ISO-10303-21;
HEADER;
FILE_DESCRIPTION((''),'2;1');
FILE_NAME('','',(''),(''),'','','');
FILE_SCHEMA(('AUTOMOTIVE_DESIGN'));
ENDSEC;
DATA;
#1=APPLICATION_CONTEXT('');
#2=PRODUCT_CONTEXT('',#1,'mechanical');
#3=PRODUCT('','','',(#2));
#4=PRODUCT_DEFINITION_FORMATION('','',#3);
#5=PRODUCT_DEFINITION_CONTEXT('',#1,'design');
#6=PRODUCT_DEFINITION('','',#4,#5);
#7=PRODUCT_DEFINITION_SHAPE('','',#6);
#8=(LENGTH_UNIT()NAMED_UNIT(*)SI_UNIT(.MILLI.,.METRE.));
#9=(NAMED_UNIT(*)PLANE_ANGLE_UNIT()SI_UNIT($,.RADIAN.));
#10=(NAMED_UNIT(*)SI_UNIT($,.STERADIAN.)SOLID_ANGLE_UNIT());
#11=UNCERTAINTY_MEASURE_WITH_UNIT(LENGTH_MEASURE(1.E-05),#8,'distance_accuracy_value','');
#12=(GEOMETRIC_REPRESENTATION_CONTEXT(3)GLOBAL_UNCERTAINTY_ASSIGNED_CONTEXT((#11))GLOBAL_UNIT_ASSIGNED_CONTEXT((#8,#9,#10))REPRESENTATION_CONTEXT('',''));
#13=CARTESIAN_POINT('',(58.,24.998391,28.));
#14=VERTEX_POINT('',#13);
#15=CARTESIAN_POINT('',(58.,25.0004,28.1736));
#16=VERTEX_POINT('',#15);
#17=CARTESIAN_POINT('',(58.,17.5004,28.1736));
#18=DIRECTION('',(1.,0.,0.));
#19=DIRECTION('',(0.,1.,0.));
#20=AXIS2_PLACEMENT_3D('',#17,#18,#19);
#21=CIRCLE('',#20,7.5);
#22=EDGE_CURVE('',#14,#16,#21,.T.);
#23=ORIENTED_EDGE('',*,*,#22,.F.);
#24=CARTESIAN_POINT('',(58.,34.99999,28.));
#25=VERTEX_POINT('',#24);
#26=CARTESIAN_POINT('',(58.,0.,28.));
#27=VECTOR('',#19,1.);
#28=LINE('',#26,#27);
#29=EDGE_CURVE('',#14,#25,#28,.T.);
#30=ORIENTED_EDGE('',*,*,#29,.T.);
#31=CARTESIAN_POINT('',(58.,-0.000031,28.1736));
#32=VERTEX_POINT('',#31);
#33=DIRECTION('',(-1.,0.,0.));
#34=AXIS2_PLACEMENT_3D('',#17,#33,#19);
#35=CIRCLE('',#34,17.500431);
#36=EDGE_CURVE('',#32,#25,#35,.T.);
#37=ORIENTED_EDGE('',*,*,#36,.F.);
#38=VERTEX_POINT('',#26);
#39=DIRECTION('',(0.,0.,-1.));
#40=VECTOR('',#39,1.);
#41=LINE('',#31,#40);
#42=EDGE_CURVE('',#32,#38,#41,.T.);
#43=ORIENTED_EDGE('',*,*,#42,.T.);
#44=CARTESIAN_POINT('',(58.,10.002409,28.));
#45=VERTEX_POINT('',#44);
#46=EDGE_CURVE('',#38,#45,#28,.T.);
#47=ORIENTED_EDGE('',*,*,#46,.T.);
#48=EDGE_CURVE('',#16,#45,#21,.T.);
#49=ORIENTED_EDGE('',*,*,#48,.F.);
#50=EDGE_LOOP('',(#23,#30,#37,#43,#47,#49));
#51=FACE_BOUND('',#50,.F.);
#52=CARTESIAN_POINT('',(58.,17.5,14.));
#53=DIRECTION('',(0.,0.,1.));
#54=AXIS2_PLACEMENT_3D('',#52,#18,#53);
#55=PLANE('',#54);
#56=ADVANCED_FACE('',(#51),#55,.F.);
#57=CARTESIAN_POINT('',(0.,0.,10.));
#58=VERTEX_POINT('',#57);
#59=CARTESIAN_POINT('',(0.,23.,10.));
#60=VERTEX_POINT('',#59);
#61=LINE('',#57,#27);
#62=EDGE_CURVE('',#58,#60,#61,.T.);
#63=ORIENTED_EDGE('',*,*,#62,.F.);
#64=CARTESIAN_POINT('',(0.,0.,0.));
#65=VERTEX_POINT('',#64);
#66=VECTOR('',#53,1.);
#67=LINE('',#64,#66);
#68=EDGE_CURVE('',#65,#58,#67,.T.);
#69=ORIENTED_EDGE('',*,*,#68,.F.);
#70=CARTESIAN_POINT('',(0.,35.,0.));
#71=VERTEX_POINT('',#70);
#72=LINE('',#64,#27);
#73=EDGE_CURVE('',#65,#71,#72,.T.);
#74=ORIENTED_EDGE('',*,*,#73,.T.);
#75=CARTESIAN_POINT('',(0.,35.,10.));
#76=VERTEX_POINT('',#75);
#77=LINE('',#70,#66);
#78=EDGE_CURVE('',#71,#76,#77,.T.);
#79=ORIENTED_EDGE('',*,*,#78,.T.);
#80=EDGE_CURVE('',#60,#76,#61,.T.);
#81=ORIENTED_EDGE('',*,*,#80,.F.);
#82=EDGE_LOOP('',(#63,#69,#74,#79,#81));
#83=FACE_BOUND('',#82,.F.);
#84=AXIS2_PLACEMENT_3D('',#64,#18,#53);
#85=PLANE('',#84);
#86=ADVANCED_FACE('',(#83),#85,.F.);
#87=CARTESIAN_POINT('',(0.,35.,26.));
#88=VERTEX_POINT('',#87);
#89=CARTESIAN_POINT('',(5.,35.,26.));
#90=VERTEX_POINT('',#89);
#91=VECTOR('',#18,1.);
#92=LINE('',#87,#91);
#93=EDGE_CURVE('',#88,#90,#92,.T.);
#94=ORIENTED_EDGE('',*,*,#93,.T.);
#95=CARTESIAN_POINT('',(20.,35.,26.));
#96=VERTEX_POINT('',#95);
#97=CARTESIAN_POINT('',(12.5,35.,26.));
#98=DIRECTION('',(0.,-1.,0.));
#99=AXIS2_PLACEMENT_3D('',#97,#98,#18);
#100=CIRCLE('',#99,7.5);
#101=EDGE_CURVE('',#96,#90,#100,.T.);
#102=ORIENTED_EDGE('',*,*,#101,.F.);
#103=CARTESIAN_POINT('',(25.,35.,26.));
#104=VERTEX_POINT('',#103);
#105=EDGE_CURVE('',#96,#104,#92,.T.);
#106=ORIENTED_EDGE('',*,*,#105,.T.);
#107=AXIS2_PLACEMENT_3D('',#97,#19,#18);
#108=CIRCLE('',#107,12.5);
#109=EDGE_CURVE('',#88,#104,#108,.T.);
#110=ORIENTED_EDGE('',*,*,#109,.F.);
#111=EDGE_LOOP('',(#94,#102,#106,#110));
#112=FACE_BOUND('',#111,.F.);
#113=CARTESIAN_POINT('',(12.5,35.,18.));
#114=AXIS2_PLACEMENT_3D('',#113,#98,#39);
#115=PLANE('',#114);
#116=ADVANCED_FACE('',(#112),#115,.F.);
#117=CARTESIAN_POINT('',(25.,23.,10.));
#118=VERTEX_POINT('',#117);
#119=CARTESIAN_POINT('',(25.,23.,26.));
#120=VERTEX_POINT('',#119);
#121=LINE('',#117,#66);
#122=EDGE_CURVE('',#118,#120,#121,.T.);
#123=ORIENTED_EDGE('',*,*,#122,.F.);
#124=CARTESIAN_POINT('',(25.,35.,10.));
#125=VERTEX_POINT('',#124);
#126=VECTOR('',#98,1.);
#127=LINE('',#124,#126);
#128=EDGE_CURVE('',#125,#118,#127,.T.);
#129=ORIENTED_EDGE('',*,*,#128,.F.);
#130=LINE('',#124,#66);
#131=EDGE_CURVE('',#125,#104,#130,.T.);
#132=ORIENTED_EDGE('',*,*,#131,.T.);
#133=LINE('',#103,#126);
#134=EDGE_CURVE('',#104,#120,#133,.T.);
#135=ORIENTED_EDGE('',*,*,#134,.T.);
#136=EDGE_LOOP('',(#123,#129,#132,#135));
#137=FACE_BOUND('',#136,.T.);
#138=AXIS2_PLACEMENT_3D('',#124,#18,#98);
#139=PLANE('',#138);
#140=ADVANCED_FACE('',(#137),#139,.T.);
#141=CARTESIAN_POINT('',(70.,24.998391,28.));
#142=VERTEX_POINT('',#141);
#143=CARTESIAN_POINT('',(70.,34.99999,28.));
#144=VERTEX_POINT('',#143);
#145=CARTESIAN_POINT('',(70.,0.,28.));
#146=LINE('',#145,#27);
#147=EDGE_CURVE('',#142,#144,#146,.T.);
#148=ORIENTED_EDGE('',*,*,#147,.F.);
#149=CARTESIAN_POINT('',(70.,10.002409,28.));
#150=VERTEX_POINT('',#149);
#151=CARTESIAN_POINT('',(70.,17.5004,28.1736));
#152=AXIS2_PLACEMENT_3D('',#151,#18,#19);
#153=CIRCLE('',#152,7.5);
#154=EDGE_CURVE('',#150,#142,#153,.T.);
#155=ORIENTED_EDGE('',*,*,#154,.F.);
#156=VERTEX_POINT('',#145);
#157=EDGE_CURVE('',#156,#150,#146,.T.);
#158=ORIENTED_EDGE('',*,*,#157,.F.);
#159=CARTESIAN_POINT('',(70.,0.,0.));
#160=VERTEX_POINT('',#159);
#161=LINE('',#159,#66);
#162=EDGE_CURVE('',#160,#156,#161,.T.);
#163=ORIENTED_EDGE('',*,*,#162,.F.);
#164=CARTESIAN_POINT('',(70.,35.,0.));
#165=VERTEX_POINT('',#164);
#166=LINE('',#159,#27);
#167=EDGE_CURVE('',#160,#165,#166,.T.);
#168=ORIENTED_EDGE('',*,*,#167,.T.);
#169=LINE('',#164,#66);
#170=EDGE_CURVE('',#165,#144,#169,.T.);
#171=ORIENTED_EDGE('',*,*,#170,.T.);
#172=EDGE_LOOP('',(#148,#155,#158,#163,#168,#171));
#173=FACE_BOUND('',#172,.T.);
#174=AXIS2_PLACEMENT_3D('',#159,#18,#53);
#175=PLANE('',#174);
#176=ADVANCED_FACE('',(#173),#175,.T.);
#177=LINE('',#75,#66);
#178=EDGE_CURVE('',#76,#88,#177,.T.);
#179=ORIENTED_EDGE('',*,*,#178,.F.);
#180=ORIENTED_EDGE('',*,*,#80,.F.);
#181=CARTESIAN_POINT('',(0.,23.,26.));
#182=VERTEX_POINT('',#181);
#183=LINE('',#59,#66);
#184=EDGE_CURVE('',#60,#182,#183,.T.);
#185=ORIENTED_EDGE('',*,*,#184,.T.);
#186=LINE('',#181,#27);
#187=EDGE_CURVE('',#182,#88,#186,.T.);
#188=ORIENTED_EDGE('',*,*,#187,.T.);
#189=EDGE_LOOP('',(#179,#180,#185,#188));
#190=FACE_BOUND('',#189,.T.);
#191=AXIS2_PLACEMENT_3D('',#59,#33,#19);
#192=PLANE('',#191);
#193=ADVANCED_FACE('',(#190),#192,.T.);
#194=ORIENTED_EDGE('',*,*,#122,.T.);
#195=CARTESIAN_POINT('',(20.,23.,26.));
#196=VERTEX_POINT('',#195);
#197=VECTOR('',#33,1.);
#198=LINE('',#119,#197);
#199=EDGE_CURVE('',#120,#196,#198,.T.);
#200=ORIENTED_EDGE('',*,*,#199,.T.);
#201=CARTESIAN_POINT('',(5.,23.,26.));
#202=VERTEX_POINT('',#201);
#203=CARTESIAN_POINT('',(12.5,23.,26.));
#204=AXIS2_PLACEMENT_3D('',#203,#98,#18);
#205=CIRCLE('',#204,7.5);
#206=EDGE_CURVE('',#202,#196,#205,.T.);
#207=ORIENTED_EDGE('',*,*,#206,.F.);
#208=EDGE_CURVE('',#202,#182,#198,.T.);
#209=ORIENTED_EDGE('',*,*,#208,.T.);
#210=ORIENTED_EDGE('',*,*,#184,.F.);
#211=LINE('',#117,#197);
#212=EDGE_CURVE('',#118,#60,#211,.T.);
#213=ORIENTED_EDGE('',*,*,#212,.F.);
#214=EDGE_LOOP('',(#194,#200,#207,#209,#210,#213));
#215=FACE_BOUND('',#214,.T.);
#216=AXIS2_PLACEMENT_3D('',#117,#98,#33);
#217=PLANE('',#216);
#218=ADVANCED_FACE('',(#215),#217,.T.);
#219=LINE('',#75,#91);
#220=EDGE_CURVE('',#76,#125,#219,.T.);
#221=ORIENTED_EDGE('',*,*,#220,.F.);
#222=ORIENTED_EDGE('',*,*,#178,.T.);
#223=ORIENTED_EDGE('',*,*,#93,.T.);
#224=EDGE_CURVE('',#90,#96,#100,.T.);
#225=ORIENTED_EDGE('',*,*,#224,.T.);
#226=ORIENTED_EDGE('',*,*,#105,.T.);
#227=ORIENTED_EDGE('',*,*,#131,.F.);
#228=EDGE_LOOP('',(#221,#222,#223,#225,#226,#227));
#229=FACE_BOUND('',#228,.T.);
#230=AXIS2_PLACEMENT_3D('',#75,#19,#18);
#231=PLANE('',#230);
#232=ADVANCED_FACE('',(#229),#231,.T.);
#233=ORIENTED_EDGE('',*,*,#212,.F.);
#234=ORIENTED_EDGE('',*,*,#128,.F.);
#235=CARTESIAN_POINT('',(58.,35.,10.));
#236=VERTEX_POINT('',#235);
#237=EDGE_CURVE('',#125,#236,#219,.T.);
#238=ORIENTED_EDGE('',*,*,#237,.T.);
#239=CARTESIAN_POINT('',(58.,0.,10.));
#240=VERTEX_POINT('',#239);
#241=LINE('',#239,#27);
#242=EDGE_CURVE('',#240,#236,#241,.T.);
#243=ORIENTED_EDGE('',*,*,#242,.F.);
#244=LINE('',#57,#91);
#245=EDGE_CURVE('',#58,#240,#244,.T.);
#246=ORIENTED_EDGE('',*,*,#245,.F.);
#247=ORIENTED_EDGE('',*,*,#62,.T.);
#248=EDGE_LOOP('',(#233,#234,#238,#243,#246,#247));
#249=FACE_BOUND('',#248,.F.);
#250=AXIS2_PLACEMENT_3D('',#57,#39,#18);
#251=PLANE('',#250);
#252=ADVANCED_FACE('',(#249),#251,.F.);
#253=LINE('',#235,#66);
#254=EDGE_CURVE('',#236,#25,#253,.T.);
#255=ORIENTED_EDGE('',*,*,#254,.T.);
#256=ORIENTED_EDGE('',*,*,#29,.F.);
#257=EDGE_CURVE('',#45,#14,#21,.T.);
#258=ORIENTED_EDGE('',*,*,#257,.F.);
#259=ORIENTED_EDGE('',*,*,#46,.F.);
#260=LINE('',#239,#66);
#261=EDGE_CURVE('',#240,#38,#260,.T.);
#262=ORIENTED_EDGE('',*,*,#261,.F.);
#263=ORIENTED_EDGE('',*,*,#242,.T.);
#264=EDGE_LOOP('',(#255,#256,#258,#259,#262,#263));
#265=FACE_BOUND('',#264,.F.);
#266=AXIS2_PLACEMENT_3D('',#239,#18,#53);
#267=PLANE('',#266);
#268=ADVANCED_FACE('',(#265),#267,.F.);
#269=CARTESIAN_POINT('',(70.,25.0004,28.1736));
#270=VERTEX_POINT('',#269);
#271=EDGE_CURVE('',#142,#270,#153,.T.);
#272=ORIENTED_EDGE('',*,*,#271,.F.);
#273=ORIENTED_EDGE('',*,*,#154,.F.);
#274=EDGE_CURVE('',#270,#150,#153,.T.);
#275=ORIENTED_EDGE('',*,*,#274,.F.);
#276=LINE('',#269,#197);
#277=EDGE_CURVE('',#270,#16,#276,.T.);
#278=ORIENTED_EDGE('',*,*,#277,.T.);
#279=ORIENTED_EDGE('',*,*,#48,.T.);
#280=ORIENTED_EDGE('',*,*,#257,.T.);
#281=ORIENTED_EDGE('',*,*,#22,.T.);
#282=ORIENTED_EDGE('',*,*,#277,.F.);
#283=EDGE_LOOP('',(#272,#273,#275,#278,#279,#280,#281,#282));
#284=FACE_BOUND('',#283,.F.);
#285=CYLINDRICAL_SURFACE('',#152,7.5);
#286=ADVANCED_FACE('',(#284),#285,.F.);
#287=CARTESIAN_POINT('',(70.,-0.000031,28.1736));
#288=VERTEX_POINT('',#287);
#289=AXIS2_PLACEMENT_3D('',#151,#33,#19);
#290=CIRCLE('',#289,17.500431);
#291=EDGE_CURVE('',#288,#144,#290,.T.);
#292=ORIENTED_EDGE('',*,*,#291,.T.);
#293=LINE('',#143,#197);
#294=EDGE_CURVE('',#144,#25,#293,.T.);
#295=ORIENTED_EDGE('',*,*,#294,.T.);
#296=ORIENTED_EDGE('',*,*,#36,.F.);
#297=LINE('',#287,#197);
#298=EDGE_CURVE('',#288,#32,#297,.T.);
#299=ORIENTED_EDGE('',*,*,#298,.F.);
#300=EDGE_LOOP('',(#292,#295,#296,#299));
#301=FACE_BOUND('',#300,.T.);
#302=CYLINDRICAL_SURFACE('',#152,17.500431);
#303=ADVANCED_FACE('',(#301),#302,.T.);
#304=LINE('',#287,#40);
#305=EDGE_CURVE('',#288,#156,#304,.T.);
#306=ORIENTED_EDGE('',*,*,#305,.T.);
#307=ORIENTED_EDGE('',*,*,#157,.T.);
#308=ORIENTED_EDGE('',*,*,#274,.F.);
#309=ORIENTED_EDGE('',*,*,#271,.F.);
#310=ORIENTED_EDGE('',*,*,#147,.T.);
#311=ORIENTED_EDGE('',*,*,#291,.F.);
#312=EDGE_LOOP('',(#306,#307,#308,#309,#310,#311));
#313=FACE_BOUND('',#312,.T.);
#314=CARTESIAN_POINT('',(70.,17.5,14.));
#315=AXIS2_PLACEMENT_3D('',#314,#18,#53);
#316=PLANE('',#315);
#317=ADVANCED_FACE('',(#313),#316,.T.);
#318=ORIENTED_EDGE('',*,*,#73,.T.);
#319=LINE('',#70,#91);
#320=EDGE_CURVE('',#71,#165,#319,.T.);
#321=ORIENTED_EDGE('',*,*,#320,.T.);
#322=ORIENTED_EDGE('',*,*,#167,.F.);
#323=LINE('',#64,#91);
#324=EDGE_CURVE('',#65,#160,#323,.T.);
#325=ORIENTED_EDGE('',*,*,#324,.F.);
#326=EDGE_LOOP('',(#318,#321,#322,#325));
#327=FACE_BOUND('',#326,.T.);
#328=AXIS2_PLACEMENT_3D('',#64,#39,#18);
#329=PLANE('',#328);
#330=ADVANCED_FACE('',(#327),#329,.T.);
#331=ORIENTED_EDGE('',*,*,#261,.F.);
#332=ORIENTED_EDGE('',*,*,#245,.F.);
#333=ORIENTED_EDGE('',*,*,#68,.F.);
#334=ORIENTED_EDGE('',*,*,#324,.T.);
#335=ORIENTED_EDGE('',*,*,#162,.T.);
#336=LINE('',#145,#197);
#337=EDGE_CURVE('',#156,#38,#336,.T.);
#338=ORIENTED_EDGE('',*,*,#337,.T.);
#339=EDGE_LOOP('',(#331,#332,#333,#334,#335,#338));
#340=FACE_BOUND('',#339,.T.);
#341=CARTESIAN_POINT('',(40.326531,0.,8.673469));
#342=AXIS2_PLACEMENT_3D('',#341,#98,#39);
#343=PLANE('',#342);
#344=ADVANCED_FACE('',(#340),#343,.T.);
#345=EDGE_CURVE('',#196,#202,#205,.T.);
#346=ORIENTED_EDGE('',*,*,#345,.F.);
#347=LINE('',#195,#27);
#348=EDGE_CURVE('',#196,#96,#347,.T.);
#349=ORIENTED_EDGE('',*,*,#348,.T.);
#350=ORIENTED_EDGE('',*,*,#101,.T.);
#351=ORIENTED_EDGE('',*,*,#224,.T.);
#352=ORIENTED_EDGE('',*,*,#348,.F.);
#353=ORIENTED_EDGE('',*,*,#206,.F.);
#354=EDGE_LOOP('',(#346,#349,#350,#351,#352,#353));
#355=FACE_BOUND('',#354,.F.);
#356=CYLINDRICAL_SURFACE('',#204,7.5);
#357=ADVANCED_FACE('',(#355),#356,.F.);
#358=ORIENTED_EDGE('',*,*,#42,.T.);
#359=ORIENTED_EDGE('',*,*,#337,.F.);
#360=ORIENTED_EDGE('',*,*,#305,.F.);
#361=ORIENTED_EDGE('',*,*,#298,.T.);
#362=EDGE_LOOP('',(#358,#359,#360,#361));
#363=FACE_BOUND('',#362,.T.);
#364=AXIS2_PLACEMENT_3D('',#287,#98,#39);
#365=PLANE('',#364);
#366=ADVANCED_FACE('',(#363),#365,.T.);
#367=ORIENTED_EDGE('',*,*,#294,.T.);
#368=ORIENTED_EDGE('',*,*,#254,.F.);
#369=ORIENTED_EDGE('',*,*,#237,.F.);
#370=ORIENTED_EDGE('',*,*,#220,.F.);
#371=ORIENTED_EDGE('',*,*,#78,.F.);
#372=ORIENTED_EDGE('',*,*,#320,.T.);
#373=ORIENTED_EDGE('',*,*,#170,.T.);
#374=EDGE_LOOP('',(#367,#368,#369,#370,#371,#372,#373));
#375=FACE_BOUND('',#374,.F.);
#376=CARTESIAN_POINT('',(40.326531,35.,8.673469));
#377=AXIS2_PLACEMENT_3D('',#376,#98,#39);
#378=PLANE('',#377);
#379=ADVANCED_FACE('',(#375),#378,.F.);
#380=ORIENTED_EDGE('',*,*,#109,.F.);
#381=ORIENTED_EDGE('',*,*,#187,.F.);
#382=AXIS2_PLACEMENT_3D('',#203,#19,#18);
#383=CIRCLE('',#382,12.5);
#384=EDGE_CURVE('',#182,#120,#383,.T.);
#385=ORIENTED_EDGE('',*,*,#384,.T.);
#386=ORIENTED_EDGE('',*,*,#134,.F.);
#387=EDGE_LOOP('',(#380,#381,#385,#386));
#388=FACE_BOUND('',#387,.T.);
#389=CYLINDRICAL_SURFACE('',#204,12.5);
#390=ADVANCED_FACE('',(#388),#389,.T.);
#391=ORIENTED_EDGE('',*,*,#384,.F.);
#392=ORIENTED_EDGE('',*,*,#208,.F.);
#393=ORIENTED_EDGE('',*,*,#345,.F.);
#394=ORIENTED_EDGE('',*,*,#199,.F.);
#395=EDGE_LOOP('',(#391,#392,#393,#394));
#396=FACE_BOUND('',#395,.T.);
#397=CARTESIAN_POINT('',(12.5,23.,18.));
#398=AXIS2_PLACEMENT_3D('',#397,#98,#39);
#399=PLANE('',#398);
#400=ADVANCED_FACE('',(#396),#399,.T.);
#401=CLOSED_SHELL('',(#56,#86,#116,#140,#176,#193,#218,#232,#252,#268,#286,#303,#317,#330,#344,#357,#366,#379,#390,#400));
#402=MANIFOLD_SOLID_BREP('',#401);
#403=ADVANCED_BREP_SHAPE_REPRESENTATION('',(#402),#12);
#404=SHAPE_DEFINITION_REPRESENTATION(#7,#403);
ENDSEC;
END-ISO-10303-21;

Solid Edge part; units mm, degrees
sketch "Sketch1" plane through (0, 0, 0) normal (0, -1, 0) x (1, 0, 0)
  line L0 (0, 0) -> (70, 0)
  line L1 (70, 0) -> (70, 28)
  line L2 (70, 28) -> (58, 28)
  line L3 (58, 10) -> (58, 28)
  line L4 (0, 10) -> (58, 10)
  line L5 (0, 0) -> (0, 10)
extrude "Protrusion1" add sketch "Sketch1" against normal blind 35
sketch "Sketch2" plane through (70, 17.5, 14) normal (1, 0, 0) x (0, 1, 0)
  arc A0 (-17.5, 14.1736) -> (17.5, 14) centre (0.0004, 14.1736) cw
extrude "ExtrudedProtrusion_2" add sketch "Sketch2" against normal blind 12 material side at (70, 17.587, 45.6238)
sketch "Sketch3" plane through (29, 17.5, 10) normal (0, 0, 1) x (1, 0, 0)
  line L0 (-4, 17.5) -> (-4, 5.5)
  line L1 (-4, 5.5) -> (-29, 5.5)
  line L2 (-29, 5.5) -> (-29, 17.5)
  line L3 (-29, 17.5) -> (-4, 17.5)
extrude "ExtrudedProtrusion_3" add sketch "Sketch3" along normal blind 16
sketch "Sketch4" plane through (12.5, 23, 18) normal (0, -1, 0) x (1, 0, 0)
  arc A0 (-12.5, 8) -> (12.5, 8) centre (0, 8) cw
extrude "ExtrudedProtrusion_4" add sketch "Sketch4" against normal blind 12 material side at (12.5, 23, 38.45)
sketch "Sketch5" plane through (12.5, 23, 24.25) normal (0, -1, 0) x (1, 0, 0)
  circle A0 centre (0, 1.75) radius 7.5
extrude "ExtrudedCutout_1" cut sketch "Sketch5" against normal blind 108.8355
sketch "Sketch6" plane through (70, 17.5004, 22.837) normal (1, 0, 0) x (0, 1, 0)
  circle A0 centre (0, 5.3366) radius 7.5
extrude "ExtrudedCutout_2" cut sketch "Sketch6" against normal blind 24.048
